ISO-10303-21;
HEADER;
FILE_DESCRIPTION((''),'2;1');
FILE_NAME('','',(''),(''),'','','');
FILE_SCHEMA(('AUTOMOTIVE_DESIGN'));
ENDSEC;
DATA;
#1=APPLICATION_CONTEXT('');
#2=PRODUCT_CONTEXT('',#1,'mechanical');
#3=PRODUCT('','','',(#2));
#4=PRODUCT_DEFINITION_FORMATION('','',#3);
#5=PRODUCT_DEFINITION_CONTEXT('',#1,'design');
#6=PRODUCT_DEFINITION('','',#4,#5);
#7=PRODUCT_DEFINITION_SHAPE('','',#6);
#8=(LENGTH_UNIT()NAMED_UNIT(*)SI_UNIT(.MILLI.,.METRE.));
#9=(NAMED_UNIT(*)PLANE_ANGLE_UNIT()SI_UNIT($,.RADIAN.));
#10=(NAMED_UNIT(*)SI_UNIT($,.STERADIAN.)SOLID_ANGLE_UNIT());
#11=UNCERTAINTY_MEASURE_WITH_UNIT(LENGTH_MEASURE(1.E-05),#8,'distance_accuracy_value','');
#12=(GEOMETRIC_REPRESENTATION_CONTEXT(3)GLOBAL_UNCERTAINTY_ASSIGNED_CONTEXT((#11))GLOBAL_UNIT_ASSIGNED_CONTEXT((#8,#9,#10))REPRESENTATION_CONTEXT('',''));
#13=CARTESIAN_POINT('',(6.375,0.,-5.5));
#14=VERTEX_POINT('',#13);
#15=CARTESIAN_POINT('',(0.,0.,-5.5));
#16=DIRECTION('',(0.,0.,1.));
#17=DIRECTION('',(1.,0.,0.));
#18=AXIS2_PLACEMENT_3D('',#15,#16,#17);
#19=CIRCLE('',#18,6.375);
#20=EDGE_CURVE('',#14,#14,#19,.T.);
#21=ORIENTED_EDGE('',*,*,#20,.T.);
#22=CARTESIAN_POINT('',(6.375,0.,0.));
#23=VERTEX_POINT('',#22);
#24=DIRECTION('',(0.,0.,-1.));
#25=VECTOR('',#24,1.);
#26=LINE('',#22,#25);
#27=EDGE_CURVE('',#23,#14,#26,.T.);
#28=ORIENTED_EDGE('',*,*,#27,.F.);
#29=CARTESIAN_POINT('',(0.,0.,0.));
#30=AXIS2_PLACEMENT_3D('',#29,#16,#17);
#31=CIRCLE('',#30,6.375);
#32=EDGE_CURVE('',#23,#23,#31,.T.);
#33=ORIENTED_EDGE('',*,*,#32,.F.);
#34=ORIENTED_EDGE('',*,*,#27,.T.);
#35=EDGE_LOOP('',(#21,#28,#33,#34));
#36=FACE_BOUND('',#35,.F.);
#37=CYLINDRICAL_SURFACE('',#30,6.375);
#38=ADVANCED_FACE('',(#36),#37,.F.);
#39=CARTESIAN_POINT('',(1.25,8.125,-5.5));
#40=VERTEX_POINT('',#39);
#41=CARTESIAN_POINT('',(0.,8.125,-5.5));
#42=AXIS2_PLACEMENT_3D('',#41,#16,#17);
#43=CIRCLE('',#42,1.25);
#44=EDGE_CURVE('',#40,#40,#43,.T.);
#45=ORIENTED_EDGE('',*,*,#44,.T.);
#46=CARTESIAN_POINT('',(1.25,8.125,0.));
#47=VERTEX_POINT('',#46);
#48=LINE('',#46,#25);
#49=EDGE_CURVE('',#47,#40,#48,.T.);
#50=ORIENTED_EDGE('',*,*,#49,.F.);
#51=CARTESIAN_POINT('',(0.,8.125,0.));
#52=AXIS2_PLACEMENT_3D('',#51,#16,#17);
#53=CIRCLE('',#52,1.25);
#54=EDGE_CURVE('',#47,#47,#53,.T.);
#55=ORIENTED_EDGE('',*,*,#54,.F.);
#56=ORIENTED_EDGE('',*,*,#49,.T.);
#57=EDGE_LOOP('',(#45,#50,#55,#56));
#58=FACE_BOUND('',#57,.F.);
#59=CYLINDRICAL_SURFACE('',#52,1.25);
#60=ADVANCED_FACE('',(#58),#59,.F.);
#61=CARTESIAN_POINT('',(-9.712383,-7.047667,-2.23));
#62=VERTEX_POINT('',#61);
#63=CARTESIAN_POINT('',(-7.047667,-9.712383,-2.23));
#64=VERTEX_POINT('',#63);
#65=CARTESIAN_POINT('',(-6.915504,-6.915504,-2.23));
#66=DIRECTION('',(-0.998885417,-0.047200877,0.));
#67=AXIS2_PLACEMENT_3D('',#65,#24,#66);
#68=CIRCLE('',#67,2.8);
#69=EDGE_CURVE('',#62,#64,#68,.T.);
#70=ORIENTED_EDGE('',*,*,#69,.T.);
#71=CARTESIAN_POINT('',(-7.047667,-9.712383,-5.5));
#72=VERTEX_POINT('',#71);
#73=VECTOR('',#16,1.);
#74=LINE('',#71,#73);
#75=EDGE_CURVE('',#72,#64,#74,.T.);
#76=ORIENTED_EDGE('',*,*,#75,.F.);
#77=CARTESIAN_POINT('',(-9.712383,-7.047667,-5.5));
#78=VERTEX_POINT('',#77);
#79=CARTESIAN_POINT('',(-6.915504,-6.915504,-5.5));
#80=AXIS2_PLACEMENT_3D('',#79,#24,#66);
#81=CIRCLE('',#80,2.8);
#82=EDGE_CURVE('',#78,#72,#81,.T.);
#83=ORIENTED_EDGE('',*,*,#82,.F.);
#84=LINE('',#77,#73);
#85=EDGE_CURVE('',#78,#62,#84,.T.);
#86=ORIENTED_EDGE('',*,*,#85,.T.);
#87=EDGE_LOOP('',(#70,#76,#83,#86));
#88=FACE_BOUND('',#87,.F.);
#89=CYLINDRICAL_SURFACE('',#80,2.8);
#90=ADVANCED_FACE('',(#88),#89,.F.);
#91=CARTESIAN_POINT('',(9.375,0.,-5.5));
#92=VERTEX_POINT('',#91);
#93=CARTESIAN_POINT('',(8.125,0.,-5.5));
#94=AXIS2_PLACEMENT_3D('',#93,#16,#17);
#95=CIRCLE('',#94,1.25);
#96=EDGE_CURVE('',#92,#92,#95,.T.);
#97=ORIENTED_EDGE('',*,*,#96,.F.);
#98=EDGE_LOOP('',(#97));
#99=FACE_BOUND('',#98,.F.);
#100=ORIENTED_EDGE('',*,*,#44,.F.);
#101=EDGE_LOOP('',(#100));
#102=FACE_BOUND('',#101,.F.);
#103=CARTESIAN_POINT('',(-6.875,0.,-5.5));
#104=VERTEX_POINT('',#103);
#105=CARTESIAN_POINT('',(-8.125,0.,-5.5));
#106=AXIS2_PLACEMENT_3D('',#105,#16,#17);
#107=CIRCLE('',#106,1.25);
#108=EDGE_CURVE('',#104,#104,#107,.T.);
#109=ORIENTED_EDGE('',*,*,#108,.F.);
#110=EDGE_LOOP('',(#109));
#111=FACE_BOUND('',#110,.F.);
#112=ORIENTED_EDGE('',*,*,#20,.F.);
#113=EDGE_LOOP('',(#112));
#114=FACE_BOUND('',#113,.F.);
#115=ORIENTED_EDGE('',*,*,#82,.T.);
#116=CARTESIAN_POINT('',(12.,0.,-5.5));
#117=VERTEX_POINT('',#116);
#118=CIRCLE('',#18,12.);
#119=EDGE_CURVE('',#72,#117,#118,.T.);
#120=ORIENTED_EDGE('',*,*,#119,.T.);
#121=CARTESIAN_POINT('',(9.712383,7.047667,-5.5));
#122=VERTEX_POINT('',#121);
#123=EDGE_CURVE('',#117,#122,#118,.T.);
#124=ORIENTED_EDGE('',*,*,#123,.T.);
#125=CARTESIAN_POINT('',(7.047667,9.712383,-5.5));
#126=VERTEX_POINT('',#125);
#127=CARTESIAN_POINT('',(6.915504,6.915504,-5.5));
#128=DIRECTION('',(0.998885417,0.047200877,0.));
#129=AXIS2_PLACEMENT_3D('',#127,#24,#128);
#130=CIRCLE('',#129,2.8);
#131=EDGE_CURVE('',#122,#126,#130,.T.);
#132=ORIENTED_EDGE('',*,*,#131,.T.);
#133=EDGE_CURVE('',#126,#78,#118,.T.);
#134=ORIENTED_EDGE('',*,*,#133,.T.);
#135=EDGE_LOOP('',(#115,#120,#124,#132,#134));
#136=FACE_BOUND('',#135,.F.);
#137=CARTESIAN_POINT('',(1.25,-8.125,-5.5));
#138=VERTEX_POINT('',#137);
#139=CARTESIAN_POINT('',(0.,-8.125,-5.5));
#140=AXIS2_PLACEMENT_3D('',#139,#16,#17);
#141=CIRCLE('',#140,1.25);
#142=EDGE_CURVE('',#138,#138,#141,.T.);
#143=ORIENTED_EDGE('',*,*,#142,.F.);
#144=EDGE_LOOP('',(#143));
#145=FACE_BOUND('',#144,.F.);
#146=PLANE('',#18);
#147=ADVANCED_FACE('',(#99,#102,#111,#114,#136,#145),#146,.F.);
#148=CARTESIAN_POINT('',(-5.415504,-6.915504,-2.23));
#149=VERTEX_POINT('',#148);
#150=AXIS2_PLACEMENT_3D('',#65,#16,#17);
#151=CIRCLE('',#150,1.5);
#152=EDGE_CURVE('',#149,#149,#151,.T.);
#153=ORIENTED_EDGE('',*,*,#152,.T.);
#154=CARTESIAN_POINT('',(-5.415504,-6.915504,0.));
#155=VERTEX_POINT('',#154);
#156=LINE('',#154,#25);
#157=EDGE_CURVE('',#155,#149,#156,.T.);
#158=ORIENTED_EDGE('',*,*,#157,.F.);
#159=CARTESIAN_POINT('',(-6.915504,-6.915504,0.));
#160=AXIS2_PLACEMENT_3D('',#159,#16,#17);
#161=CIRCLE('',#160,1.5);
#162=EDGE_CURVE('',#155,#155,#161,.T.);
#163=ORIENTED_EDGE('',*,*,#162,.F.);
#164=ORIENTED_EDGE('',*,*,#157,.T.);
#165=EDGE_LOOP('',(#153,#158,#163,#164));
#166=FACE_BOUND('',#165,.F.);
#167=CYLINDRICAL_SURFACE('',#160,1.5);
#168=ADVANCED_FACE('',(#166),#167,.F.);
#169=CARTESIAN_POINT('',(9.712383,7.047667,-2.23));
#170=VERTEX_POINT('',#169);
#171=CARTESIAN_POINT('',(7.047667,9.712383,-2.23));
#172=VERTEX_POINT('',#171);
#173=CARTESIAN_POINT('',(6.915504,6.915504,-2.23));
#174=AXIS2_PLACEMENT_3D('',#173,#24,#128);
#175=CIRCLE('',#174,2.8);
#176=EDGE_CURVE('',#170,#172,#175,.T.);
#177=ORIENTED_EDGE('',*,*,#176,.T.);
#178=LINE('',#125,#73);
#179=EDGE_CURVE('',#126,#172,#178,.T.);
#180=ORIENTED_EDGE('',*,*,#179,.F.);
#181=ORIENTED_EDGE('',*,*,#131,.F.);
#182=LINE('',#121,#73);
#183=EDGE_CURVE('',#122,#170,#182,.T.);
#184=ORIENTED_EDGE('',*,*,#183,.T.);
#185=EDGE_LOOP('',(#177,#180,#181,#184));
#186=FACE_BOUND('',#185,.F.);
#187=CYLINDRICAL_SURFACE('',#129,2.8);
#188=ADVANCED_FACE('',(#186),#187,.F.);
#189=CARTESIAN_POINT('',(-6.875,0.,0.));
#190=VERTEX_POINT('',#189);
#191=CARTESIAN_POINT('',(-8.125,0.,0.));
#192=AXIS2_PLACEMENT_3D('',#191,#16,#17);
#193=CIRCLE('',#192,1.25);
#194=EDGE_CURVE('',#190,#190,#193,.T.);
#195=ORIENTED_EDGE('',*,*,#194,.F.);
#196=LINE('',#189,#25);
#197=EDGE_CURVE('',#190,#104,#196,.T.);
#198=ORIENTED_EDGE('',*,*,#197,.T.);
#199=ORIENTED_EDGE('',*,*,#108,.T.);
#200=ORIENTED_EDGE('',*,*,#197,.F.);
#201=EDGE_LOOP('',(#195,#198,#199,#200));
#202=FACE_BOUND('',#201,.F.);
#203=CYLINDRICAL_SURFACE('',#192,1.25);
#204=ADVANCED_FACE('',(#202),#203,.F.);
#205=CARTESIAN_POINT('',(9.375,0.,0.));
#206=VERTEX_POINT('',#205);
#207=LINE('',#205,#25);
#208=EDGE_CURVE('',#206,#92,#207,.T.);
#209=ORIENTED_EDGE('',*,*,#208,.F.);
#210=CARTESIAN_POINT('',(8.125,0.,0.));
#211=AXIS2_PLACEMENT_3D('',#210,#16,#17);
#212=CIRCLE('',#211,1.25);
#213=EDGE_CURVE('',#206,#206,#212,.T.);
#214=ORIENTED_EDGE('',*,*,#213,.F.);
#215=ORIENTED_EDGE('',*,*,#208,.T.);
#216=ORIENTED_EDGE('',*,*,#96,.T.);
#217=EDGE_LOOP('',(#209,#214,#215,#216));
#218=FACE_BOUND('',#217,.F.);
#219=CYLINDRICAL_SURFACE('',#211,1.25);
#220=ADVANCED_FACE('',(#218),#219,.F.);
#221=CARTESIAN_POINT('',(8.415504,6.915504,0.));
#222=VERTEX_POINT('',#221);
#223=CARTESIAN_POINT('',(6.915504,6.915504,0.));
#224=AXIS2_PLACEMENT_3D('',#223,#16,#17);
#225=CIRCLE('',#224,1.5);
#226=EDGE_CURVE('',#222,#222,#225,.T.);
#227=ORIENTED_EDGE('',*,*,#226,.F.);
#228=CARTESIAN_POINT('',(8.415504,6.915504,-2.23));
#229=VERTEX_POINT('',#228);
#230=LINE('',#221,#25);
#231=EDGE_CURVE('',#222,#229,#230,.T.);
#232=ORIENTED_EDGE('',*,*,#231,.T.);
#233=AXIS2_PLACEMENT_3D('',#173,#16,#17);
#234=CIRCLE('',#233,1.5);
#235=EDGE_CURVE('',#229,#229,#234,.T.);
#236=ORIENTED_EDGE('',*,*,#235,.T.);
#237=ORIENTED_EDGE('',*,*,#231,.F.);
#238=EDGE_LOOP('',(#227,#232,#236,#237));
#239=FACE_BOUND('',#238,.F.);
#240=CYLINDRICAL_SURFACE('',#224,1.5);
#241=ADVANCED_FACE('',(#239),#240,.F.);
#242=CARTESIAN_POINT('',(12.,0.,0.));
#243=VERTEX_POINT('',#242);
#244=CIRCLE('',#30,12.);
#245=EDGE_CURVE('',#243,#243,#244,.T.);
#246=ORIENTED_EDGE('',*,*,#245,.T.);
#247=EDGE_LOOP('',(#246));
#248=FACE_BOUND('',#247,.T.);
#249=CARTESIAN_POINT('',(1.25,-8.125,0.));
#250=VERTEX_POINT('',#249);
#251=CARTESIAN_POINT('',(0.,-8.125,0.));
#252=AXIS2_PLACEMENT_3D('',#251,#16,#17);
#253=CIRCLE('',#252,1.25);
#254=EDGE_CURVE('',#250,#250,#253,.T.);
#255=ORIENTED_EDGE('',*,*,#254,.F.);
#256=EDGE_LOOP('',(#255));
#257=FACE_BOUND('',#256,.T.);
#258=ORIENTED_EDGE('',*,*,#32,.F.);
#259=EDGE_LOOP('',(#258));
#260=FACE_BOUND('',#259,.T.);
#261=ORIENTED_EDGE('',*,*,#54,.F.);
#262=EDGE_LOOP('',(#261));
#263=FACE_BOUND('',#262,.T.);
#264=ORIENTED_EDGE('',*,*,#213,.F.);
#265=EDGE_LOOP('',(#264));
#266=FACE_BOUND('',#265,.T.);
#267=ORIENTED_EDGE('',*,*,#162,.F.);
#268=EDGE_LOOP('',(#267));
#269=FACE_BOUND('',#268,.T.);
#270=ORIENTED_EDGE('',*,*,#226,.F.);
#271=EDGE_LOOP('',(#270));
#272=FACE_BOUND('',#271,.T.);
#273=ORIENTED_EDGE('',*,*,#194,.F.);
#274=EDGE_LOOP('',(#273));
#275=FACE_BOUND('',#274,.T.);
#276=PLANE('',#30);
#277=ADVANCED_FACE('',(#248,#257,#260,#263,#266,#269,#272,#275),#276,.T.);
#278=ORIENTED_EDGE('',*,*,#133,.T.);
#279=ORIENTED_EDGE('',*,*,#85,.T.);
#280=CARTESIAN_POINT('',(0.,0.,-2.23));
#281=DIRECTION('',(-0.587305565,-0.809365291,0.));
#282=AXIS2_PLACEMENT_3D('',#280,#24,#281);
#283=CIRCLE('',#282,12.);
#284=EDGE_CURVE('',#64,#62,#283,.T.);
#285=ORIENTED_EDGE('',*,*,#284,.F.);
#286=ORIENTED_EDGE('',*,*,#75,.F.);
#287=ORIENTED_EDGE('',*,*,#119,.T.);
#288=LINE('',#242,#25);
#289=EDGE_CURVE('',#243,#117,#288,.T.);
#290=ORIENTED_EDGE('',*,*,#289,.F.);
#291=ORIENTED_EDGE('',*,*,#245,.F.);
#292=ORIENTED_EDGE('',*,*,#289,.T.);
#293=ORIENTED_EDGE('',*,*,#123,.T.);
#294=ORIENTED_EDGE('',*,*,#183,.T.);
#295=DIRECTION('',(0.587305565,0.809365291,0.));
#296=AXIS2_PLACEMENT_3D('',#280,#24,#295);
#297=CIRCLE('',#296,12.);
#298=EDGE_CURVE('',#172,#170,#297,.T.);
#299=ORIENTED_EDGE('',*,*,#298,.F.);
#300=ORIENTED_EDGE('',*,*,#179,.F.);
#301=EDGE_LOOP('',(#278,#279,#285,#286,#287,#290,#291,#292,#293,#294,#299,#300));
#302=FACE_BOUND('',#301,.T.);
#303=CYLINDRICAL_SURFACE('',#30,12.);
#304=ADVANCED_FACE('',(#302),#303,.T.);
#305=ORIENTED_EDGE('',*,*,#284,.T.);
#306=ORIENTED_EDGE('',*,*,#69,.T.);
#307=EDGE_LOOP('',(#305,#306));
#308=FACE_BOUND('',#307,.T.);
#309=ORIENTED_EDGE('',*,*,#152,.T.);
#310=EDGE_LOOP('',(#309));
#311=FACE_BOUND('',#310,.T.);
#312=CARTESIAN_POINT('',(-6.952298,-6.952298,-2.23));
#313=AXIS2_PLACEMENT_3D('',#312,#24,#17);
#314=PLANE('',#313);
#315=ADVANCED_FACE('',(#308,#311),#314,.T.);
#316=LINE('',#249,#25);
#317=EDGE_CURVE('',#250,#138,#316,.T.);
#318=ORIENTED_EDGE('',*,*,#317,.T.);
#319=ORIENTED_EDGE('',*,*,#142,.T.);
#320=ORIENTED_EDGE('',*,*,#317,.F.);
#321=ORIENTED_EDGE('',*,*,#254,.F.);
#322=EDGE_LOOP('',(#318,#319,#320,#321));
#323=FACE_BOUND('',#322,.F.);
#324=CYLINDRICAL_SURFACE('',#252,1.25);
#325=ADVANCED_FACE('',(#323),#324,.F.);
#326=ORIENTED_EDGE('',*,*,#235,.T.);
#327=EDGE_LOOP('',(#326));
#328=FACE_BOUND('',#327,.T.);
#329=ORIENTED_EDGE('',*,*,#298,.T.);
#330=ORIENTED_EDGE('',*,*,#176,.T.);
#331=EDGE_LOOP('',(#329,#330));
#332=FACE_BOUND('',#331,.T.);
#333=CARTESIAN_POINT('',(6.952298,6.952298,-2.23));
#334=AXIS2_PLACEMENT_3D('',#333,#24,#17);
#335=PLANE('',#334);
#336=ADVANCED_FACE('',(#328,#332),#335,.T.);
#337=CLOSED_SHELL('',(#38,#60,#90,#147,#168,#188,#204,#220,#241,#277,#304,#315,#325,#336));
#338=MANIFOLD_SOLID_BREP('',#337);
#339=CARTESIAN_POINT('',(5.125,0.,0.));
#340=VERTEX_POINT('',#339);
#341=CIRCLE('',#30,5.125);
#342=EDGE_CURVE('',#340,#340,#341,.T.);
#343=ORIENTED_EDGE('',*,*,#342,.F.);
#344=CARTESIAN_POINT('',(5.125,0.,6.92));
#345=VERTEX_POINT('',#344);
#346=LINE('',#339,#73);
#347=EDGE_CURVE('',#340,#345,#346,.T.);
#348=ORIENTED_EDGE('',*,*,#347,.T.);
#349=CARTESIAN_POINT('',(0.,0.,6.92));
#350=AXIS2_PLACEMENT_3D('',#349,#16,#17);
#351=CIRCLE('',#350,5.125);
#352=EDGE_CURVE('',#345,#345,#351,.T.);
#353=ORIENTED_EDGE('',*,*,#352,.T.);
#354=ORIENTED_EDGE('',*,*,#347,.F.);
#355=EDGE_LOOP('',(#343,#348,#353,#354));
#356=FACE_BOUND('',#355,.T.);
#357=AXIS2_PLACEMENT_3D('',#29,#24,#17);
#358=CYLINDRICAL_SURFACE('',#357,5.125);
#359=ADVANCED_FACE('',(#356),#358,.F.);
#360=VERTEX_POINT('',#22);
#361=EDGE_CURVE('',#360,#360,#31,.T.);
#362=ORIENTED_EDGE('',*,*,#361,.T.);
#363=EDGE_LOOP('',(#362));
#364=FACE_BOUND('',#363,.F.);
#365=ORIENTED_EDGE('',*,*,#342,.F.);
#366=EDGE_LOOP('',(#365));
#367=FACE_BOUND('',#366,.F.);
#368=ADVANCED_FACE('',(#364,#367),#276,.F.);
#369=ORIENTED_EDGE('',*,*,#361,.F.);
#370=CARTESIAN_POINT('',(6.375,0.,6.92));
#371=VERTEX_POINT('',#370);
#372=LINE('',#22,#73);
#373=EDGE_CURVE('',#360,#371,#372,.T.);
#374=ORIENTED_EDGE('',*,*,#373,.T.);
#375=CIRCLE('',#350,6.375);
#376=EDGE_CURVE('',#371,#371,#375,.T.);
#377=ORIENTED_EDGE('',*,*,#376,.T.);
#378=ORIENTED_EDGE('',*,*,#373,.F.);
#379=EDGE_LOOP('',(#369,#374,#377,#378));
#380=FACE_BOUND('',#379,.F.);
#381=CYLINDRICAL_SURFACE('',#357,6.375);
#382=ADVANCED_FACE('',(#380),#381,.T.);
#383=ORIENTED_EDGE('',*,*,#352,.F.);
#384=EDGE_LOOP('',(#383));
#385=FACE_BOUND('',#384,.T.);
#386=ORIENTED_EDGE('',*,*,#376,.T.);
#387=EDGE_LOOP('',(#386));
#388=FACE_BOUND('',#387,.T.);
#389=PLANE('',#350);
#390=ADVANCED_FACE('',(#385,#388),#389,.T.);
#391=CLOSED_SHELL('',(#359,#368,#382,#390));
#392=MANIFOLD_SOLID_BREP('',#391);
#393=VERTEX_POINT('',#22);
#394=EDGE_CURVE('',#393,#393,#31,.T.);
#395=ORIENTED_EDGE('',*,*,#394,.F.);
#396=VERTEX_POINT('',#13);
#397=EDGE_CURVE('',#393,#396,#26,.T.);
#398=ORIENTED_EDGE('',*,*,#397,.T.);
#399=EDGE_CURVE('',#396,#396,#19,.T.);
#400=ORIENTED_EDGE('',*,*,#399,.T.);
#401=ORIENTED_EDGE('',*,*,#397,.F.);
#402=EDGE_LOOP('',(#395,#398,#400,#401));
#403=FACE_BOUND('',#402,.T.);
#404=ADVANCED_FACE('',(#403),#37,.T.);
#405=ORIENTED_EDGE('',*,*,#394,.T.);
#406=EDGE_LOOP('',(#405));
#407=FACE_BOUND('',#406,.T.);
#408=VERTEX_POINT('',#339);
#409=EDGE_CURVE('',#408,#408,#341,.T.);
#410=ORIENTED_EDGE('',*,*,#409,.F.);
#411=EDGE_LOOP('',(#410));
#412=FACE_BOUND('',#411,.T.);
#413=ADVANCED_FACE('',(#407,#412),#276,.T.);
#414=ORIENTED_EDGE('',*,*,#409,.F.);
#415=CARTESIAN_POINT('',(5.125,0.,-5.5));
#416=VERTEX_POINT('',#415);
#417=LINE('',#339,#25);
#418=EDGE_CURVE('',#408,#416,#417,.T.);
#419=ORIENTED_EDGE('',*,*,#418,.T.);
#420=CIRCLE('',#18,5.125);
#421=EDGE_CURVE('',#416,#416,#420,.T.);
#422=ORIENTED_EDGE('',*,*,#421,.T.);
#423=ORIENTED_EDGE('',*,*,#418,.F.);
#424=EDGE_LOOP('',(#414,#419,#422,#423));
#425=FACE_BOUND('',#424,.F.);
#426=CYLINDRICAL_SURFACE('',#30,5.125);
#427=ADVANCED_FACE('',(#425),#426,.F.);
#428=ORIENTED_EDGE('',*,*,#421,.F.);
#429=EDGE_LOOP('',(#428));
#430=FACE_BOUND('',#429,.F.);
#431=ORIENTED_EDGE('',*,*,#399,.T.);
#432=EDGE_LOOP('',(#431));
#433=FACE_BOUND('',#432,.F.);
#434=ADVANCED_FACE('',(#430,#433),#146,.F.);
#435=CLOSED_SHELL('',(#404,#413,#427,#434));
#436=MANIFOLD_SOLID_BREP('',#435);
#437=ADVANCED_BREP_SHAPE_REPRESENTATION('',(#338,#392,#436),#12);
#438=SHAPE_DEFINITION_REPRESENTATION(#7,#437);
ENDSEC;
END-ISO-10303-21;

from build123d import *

# Parameters (mm, degrees)
F0_R     = 6.375
F0_R_2   = 5.125
F1_DEPTH = 6.92
F0_R_3   = 12
F0_R_4   = 1.5
F0_R_5   = 1.25
F2_DEPTH = 5.5
F5_DEPTH = 3.27
F6_DEPTH = 5.5


with BuildPart() as f1:
    # F0 (on Top) → F1 (new body)
    with BuildSketch(Plane.XY):
        Circle(F0_R)
        Circle(F0_R_2, mode=Mode.SUBTRACT)
    extrude(amount=F1_DEPTH)


with BuildPart() as f2:
    # F0 (on Top) → F2 (new body)
    with BuildSketch(Plane.XY):
        Circle(F0_R_3)
        with Locations((-6.91550432, -6.91550432)):
            Circle(F0_R_4, mode=Mode.SUBTRACT)
        with Locations((0, -8.125)):
            Circle(F0_R_5, mode=Mode.SUBTRACT)
        with Locations((-8.125, 0)):
            Circle(F0_R_5, mode=Mode.SUBTRACT)
        Circle(F0_R, mode=Mode.SUBTRACT)
        with Locations((8.125, 0)):
            Circle(F0_R_5, mode=Mode.SUBTRACT)
        with Locations((0, 8.125)):
            Circle(F0_R_5, mode=Mode.SUBTRACT)
        with Locations((6.91550432, 6.91550432)):
            Circle(F0_R_4, mode=Mode.SUBTRACT)
    extrude(amount=-F2_DEPTH)

    # F4 (on offset) → F5 (cut)
    with BuildSketch(Plane(origin=(0, 0, -5.5), x_dir=(1, 0, 0), z_dir=(0, 0, -1))):
        with BuildLine():
            ThreePointArc((-9.7123834889, 7.0476667745), (-4.9356053327, 4.9356053327), (-7.0476667745, 9.7123834889))
            ThreePointArc((-7.0476667745, 9.7123834889), (-8.4852813742, 8.4852813742), (-9.7123834889, 7.0476667745))
        make_face()
        with BuildLine():
            ThreePointArc((7.0476667745, -9.7123834889), (8.4852813742, -8.4852813742), (9.7123834889, -7.0476667745))
            ThreePointArc((9.7123834889, -7.0476667745), (4.9356053327, -4.9356053327), (7.0476667745, -9.7123834889))
        make_face()
    extrude(amount=-F5_DEPTH, mode=Mode.SUBTRACT)


with BuildPart() as f6:
    # F0 (on Top) → F6 (new body)
    with BuildSketch(Plane.XY):
        Circle(F0_R)
        Circle(F0_R_2, mode=Mode.SUBTRACT)
    extrude(amount=-F6_DEPTH)


solid = Compound([f1.part, f2.part, f6.part])
